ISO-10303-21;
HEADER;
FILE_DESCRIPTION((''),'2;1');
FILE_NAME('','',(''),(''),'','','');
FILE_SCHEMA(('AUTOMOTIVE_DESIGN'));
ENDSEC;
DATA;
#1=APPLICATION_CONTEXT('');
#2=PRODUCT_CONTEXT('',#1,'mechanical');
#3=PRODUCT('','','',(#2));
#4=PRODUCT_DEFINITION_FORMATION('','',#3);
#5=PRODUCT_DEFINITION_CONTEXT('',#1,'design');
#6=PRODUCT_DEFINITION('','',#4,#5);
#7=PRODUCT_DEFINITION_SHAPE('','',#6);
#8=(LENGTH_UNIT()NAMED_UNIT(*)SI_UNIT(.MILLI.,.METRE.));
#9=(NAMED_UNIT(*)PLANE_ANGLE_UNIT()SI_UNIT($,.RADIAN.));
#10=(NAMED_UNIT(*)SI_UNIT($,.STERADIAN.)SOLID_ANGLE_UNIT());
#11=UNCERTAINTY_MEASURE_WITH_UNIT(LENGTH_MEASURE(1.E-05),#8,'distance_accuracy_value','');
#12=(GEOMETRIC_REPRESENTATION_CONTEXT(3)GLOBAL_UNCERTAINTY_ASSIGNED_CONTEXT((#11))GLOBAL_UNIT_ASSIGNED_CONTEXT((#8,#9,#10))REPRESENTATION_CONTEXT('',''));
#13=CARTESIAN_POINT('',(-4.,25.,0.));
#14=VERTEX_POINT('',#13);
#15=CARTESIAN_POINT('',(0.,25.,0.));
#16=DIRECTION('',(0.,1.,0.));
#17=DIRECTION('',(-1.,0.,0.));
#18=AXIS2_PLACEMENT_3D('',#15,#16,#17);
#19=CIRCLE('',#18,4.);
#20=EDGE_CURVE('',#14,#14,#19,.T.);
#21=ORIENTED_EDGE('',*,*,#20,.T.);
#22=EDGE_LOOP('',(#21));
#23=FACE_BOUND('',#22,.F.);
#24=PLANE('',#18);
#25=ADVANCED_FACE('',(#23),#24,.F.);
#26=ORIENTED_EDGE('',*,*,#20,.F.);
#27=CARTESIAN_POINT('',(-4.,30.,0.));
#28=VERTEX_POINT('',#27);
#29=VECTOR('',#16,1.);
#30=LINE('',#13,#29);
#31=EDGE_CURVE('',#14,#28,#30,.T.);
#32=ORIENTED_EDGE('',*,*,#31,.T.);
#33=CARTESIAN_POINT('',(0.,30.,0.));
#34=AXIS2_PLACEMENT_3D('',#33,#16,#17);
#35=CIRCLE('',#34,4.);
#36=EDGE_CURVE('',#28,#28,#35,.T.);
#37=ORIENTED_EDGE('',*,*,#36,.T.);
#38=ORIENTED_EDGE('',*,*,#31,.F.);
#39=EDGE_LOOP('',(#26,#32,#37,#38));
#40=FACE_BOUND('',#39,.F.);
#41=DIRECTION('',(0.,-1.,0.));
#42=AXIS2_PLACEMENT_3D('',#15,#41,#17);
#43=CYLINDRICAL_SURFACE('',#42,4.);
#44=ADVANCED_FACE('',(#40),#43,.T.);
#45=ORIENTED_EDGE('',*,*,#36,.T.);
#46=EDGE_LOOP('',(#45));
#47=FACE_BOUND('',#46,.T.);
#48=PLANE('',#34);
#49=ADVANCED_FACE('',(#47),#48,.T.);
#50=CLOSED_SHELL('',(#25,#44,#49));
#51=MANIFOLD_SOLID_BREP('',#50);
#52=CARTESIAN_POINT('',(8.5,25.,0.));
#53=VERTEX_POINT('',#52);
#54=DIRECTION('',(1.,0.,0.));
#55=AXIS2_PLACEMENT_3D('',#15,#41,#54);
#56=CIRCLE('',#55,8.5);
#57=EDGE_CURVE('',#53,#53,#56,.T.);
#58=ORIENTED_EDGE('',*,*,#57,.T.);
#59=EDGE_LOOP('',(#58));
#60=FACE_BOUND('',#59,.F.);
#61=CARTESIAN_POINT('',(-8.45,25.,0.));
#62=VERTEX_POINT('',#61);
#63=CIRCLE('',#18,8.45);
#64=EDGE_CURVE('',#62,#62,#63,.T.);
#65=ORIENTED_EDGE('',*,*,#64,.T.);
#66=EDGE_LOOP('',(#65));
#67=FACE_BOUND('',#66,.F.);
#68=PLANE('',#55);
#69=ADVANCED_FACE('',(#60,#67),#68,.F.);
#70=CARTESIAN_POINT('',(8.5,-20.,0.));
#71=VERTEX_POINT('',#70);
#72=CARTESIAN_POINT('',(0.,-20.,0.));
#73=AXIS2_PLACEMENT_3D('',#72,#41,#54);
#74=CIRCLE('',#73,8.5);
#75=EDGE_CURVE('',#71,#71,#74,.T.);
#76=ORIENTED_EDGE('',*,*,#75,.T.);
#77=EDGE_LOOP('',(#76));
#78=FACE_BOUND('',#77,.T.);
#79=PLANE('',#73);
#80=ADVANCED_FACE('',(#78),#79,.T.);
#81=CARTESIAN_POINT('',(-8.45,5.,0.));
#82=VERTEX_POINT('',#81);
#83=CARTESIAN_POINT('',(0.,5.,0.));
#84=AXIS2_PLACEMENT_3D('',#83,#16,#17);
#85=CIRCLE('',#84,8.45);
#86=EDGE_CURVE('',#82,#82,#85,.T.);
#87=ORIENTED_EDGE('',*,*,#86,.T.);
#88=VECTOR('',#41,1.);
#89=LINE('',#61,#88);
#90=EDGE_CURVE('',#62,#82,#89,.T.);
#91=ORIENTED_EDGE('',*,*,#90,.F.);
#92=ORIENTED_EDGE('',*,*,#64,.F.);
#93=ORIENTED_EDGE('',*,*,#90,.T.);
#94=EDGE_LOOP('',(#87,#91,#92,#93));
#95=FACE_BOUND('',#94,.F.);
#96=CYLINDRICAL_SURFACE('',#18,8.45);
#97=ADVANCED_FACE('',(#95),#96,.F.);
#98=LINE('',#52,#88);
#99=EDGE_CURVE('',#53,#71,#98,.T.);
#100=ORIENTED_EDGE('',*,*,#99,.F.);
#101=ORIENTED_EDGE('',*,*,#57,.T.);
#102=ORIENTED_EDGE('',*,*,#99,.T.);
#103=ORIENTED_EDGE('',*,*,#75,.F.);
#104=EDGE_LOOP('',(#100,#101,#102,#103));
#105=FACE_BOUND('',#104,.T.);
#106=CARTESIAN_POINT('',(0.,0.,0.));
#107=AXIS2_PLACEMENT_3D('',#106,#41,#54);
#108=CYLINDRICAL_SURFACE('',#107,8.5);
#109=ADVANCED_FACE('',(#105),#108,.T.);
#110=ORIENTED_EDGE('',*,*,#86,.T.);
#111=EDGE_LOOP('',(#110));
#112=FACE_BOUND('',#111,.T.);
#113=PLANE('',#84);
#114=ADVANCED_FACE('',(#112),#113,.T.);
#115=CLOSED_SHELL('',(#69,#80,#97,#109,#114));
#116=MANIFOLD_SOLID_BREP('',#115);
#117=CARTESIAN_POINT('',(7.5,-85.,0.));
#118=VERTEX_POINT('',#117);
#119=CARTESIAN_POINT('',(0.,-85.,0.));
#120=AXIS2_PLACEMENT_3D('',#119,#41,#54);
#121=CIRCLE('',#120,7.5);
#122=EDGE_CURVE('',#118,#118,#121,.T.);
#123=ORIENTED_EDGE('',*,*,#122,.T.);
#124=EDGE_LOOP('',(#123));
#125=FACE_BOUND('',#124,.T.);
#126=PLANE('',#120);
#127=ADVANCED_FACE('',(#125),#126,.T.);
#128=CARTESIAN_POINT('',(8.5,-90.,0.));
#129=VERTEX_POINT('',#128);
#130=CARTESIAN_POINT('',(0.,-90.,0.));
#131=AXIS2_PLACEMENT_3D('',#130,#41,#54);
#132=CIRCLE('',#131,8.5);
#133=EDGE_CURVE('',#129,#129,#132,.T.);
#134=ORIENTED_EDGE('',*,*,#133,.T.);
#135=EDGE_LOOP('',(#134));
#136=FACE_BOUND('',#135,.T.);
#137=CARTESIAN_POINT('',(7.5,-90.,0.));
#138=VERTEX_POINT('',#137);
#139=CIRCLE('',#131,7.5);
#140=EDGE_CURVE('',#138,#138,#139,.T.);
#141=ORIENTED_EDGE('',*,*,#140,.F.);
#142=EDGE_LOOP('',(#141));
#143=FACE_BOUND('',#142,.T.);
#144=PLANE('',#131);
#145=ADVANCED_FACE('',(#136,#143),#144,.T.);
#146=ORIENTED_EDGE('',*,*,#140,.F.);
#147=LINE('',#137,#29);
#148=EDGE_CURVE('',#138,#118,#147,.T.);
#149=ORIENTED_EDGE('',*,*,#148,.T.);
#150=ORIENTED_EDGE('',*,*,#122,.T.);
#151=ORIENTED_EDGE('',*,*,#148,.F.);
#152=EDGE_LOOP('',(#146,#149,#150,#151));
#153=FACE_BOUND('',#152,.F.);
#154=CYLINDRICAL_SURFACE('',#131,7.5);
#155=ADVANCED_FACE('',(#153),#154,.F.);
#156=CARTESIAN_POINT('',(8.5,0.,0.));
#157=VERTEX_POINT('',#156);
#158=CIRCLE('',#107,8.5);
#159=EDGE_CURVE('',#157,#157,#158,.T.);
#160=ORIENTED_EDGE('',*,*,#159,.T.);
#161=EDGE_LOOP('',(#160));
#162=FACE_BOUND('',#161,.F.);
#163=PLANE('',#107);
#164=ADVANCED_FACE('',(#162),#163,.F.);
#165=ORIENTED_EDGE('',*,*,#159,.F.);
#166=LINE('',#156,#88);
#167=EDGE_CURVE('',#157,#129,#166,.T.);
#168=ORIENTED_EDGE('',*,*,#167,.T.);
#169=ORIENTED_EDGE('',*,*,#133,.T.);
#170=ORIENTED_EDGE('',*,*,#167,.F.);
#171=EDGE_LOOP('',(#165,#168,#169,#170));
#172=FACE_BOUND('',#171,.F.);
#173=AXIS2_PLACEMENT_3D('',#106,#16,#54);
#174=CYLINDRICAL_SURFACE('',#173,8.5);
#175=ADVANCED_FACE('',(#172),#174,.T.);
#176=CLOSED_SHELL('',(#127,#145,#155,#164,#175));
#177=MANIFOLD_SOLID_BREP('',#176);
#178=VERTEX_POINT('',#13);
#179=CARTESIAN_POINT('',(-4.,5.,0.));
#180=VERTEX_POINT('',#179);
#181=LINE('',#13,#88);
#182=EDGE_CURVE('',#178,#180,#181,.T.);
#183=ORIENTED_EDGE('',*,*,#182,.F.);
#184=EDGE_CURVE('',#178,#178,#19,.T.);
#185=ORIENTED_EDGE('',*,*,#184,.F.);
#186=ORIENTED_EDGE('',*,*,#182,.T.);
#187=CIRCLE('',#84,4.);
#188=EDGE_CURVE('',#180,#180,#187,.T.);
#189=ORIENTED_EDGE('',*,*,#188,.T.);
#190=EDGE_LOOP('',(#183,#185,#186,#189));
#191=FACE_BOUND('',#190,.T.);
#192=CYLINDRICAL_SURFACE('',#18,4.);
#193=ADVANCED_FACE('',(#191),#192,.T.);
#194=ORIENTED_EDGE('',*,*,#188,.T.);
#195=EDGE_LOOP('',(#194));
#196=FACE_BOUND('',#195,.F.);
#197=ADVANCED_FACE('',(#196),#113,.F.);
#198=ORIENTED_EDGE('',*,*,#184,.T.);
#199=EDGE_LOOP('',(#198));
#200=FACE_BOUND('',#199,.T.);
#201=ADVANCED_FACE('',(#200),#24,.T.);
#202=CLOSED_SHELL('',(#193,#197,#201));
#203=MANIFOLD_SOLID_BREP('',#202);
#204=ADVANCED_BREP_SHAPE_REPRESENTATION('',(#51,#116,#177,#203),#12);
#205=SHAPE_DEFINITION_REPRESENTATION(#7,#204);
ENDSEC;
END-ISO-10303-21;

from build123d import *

# Parameters (mm, degrees)
F0_R          = 8.5
F1_DEPTH      = 90
F2_R          = 8.5
F3_DEPTH      = 20
F3_DEPTH_BACK = 25
F4_R          = 4
F5_DEPTH      = 5
F6_R          = 8.45
F7_DEPTH      = 20
F8_DEPTH      = 20
F10_R         = 7.5
F11_DEPTH     = 5


# Not quite as in the source:
# - the program builds the solid bodies; features that only make, move or delete a surface that nothing else refers to are left out


with BuildPart() as f1:
    # F0 (on Front) → F1 (new body)
    with BuildSketch(Plane.XZ):
        Circle(F0_R)
    extrude(amount=F1_DEPTH)

    # F10 (on face) → F11 (cut)
    with BuildSketch(Plane.XZ.offset(90)):
        Circle(F10_R)
    extrude(amount=-F11_DEPTH, mode=Mode.SUBTRACT)


with BuildPart() as f3:
    # F2 (on Front) → F3 (new body, two sides)
    with BuildSketch(Plane.XZ) as f3_sk:
        Circle(F2_R)
    extrude(amount=F3_DEPTH)
    extrude(f3_sk.sketch, amount=-F3_DEPTH_BACK)

    # F6 (on face) → F7 (cut)
    with BuildSketch(Plane(origin=(0, 25, 0), x_dir=(-1, 0, 0), z_dir=(0, 1, 0))):
        Circle(F6_R)
    extrude(amount=-F7_DEPTH, mode=Mode.SUBTRACT)


with BuildPart() as f5:
    # F4 (on face) → F5 (new body)
    with BuildSketch(Plane(origin=(0, 25, 0), x_dir=(-1, 0, 0), z_dir=(0, 1, 0))):
        Circle(F4_R)
    extrude(amount=F5_DEPTH)


with BuildPart() as f8:
    # F4 (on face) → F8 (new body)
    with BuildSketch(Plane(origin=(0, 25, 0), x_dir=(-1, 0, 0), z_dir=(0, 1, 0))):
        Circle(F4_R)
    extrude(amount=-F8_DEPTH)


solid = Compound([f1.part, f3.part, f5.part, f8.part])
